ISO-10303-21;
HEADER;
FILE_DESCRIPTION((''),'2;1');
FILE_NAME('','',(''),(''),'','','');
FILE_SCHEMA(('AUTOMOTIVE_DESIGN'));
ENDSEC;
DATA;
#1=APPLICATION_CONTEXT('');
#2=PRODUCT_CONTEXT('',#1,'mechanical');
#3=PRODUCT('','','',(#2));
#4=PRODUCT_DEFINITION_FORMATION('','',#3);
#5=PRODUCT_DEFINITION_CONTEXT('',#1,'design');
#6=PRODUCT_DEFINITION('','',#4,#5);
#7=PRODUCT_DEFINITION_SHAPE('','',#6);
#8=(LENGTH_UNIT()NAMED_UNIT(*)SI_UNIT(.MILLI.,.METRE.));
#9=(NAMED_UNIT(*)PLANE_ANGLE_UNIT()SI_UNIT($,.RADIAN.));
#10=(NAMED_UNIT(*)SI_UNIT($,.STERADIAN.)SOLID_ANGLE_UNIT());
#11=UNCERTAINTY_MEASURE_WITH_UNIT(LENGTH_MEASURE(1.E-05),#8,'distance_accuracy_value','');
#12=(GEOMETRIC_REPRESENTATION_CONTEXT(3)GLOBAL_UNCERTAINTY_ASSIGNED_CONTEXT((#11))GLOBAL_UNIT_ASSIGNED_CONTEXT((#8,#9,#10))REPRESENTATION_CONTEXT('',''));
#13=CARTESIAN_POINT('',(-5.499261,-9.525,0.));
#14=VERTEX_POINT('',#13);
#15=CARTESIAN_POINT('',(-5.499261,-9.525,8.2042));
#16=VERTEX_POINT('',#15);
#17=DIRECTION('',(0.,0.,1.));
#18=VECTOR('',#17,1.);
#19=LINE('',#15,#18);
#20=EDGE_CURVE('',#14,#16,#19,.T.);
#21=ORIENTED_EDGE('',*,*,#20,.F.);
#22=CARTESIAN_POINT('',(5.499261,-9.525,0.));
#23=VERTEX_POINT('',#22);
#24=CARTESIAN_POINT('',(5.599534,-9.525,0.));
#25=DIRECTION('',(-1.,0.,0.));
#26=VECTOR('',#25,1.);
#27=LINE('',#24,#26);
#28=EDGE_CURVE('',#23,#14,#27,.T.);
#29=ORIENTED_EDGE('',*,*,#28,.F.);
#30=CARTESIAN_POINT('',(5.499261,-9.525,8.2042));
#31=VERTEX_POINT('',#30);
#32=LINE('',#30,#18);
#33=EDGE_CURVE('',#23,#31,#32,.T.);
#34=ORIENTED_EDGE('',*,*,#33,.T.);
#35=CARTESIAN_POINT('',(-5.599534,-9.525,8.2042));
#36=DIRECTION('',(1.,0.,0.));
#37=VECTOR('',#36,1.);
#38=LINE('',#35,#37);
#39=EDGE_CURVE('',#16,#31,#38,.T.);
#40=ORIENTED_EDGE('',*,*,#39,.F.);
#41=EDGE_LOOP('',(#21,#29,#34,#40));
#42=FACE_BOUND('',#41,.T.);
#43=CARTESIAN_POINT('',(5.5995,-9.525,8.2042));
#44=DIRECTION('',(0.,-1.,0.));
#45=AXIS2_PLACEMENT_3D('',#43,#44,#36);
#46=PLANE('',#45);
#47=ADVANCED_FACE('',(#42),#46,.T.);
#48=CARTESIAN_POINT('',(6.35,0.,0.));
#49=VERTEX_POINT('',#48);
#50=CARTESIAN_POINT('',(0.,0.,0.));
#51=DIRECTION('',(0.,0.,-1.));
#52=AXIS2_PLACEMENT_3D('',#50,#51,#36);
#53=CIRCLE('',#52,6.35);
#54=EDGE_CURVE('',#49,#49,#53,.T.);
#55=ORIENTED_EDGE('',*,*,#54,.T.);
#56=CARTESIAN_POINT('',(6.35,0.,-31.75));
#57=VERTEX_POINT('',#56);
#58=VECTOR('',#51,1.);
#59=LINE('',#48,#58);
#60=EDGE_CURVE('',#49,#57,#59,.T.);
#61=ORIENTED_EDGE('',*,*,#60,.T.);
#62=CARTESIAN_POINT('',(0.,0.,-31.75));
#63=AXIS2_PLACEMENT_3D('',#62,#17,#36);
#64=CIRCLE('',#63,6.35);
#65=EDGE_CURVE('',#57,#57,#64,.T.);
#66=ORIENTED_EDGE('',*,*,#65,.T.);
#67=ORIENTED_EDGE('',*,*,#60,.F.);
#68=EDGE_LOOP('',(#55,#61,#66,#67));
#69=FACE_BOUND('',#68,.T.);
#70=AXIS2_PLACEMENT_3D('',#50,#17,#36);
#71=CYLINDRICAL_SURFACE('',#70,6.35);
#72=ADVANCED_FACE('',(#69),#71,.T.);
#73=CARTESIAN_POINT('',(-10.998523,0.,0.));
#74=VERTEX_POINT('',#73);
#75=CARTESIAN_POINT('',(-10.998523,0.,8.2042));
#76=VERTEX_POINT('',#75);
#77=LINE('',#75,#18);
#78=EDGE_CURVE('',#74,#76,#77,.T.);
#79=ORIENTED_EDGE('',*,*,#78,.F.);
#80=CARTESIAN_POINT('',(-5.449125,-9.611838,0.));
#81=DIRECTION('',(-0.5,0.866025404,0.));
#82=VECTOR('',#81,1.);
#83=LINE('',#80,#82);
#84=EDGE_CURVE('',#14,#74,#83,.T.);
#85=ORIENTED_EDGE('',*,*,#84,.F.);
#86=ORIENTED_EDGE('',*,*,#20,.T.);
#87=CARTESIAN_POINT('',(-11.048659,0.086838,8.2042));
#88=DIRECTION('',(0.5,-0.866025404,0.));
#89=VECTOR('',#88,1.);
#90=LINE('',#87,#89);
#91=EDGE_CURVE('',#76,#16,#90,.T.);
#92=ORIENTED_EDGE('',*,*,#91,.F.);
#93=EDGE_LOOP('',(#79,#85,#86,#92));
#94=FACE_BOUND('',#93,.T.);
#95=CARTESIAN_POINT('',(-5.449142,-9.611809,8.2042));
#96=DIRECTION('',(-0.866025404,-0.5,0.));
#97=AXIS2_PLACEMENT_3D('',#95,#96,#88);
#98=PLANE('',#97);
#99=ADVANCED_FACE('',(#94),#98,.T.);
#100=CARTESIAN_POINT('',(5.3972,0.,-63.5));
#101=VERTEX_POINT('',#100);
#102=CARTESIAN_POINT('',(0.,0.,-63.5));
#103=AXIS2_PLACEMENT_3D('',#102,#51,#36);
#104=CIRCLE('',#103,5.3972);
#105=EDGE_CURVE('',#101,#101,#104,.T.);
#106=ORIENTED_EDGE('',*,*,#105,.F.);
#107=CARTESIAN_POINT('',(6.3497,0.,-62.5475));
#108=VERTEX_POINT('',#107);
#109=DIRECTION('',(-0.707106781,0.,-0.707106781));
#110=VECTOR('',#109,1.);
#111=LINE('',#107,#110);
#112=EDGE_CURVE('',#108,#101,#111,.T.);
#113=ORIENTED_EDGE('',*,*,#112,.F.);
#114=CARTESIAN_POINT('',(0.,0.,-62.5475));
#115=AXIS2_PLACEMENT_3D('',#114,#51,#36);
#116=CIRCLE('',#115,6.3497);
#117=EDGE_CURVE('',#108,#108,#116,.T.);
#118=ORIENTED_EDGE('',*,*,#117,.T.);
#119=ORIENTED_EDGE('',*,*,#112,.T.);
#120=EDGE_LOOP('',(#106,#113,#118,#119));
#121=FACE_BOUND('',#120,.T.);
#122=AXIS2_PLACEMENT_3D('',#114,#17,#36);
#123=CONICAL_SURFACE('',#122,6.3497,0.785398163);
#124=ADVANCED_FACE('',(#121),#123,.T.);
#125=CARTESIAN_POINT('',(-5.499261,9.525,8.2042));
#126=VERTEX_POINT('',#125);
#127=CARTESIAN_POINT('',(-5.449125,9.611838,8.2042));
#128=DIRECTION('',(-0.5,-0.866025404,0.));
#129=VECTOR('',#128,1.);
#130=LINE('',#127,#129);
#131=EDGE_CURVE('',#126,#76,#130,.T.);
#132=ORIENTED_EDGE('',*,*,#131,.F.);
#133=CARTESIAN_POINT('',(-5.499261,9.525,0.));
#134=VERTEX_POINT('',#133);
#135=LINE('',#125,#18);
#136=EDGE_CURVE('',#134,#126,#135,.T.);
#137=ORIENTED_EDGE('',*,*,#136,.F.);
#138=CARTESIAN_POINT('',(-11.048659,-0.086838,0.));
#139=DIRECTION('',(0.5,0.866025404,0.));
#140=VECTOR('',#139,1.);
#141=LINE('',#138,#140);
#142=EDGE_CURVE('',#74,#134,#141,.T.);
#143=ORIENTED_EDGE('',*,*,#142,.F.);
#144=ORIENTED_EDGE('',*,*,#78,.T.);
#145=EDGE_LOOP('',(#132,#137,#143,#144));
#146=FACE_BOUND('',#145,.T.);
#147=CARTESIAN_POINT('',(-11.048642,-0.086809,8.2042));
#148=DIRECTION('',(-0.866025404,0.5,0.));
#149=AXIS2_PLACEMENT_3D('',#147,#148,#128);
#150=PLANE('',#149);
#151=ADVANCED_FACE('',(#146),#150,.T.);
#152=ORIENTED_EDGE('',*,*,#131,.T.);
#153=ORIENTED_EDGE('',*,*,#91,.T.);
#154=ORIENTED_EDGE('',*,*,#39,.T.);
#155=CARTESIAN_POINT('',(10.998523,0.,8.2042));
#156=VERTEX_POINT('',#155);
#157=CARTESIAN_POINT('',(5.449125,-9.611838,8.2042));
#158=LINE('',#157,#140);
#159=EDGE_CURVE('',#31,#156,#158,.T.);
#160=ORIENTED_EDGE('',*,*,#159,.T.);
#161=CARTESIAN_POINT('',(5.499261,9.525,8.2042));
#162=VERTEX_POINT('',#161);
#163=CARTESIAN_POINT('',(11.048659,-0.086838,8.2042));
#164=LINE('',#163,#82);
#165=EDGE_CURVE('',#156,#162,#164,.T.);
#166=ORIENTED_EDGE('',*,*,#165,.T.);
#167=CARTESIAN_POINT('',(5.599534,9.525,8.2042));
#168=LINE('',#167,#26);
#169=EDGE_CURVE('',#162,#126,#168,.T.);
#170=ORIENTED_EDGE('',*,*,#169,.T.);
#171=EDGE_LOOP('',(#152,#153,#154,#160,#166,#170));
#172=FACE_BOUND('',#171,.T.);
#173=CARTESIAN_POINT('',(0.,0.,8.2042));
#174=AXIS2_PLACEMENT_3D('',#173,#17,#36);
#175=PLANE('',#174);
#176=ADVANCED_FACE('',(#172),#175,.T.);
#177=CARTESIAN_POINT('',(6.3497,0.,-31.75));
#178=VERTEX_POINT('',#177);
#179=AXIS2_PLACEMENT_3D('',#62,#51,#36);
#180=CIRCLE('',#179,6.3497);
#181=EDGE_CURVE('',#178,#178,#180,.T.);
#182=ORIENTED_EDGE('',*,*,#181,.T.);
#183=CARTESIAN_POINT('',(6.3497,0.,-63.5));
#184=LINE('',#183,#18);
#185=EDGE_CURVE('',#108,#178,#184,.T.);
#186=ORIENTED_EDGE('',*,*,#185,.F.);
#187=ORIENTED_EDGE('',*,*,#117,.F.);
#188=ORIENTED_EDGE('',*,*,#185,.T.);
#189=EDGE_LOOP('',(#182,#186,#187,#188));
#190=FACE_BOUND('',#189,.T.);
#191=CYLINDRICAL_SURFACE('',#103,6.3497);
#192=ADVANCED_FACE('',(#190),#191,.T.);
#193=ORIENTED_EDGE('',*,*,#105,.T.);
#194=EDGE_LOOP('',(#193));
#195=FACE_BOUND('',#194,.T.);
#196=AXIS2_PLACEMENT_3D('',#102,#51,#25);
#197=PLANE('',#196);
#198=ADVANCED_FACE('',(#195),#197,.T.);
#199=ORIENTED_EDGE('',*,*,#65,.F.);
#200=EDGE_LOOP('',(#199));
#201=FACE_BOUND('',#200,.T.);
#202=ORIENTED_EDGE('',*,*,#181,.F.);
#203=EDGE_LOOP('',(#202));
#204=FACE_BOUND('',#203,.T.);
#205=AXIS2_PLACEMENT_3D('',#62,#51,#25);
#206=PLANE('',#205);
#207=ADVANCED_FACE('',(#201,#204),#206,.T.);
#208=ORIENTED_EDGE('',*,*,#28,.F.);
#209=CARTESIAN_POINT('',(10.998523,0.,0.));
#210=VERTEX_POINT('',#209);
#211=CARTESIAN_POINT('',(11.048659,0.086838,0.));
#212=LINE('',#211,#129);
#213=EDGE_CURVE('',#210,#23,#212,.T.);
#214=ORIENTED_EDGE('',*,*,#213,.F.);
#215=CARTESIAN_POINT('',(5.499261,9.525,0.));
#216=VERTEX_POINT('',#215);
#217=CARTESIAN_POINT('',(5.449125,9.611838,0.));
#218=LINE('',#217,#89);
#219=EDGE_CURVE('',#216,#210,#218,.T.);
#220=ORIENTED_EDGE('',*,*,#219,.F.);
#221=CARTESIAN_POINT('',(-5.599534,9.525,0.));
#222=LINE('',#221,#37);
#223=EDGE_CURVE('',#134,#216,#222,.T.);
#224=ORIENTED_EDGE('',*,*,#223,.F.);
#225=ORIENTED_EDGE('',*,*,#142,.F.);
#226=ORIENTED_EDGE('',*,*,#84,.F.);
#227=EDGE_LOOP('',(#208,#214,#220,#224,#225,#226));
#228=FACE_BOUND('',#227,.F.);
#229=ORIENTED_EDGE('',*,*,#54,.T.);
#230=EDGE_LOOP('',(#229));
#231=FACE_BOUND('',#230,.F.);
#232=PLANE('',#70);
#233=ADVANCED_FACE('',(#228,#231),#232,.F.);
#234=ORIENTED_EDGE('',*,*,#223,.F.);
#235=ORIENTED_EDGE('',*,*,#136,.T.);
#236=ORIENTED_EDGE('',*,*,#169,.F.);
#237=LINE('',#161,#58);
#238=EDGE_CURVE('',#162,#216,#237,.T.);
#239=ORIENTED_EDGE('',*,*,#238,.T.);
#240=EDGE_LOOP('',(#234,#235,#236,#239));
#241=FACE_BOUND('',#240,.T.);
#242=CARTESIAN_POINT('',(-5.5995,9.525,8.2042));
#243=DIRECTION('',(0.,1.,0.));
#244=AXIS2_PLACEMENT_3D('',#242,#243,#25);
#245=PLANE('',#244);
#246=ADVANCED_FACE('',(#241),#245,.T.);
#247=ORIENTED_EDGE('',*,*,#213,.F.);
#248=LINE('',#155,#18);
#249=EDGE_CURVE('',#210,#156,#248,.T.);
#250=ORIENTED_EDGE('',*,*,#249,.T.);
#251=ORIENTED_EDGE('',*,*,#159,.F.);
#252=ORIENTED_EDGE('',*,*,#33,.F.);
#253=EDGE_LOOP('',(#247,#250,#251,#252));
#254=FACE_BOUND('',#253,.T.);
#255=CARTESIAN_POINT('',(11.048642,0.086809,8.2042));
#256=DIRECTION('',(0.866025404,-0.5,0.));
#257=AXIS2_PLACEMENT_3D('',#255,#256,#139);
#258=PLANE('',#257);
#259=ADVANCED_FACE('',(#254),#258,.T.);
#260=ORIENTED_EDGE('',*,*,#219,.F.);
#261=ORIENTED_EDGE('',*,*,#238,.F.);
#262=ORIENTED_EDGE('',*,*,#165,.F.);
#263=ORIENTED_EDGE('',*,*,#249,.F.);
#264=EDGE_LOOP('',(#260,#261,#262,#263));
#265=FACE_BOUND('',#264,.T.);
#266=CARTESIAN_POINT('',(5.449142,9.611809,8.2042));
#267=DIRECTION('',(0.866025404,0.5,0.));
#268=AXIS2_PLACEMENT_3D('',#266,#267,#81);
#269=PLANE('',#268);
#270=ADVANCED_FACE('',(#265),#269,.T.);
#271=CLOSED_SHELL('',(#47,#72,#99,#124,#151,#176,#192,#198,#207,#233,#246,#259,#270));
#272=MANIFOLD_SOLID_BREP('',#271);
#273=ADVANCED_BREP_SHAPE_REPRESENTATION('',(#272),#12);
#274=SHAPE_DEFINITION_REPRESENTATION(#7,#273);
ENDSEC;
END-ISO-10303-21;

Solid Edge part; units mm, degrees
sketch "Sketch1" plane through (0, 0, 0) normal (0, 0, 1) x (1, 0, 0)
  circle A0 centre (0, 0) radius 11.049
  dimension "D1" = 22.098
extrude "Protrusion1" add sketch "Sketch1" along normal blind 8.2042
sketch "Sketch2" plane through (0, 0, 0) normal (0, 0, -1) x (1, 0, 0)
  circle A0 centre (0, 0) radius 6.35
extrude "Protrusion2" add sketch "Sketch2" along normal blind 63.5
sketch "Sketch3" plane through (0, 0, -63.5) normal (0, 0, -1) x (1, 0, 0)
  circle A0 centre (0, 0) radius 6.3497
extrude "Cutout1" cut sketch "Sketch3" against normal blind 31.75 flip side to cut
chamfer "Chamfer_1" distance 0.9525 angle 45 1 edges at (-6.3497, 0, -63.5)
sketch "Sketch4" plane through (0, 0, 8.2042) normal (0, 0, 1) x (1, 0, 0)
  line L0 (-5.5995, 9.525) -> (5.5995, 9.525)
  dimension "D1" = 19.05
extrude "Cutout2" cut sketch "Sketch4" against normal up to next material side at (0, 9.575, 8.2042)
pattern_circular "Pattern1" count 6 over 360 about axis through (0, 0, 8.2042) along (0, 0, 1) of "Cutout2"
properties part number "24101154"
